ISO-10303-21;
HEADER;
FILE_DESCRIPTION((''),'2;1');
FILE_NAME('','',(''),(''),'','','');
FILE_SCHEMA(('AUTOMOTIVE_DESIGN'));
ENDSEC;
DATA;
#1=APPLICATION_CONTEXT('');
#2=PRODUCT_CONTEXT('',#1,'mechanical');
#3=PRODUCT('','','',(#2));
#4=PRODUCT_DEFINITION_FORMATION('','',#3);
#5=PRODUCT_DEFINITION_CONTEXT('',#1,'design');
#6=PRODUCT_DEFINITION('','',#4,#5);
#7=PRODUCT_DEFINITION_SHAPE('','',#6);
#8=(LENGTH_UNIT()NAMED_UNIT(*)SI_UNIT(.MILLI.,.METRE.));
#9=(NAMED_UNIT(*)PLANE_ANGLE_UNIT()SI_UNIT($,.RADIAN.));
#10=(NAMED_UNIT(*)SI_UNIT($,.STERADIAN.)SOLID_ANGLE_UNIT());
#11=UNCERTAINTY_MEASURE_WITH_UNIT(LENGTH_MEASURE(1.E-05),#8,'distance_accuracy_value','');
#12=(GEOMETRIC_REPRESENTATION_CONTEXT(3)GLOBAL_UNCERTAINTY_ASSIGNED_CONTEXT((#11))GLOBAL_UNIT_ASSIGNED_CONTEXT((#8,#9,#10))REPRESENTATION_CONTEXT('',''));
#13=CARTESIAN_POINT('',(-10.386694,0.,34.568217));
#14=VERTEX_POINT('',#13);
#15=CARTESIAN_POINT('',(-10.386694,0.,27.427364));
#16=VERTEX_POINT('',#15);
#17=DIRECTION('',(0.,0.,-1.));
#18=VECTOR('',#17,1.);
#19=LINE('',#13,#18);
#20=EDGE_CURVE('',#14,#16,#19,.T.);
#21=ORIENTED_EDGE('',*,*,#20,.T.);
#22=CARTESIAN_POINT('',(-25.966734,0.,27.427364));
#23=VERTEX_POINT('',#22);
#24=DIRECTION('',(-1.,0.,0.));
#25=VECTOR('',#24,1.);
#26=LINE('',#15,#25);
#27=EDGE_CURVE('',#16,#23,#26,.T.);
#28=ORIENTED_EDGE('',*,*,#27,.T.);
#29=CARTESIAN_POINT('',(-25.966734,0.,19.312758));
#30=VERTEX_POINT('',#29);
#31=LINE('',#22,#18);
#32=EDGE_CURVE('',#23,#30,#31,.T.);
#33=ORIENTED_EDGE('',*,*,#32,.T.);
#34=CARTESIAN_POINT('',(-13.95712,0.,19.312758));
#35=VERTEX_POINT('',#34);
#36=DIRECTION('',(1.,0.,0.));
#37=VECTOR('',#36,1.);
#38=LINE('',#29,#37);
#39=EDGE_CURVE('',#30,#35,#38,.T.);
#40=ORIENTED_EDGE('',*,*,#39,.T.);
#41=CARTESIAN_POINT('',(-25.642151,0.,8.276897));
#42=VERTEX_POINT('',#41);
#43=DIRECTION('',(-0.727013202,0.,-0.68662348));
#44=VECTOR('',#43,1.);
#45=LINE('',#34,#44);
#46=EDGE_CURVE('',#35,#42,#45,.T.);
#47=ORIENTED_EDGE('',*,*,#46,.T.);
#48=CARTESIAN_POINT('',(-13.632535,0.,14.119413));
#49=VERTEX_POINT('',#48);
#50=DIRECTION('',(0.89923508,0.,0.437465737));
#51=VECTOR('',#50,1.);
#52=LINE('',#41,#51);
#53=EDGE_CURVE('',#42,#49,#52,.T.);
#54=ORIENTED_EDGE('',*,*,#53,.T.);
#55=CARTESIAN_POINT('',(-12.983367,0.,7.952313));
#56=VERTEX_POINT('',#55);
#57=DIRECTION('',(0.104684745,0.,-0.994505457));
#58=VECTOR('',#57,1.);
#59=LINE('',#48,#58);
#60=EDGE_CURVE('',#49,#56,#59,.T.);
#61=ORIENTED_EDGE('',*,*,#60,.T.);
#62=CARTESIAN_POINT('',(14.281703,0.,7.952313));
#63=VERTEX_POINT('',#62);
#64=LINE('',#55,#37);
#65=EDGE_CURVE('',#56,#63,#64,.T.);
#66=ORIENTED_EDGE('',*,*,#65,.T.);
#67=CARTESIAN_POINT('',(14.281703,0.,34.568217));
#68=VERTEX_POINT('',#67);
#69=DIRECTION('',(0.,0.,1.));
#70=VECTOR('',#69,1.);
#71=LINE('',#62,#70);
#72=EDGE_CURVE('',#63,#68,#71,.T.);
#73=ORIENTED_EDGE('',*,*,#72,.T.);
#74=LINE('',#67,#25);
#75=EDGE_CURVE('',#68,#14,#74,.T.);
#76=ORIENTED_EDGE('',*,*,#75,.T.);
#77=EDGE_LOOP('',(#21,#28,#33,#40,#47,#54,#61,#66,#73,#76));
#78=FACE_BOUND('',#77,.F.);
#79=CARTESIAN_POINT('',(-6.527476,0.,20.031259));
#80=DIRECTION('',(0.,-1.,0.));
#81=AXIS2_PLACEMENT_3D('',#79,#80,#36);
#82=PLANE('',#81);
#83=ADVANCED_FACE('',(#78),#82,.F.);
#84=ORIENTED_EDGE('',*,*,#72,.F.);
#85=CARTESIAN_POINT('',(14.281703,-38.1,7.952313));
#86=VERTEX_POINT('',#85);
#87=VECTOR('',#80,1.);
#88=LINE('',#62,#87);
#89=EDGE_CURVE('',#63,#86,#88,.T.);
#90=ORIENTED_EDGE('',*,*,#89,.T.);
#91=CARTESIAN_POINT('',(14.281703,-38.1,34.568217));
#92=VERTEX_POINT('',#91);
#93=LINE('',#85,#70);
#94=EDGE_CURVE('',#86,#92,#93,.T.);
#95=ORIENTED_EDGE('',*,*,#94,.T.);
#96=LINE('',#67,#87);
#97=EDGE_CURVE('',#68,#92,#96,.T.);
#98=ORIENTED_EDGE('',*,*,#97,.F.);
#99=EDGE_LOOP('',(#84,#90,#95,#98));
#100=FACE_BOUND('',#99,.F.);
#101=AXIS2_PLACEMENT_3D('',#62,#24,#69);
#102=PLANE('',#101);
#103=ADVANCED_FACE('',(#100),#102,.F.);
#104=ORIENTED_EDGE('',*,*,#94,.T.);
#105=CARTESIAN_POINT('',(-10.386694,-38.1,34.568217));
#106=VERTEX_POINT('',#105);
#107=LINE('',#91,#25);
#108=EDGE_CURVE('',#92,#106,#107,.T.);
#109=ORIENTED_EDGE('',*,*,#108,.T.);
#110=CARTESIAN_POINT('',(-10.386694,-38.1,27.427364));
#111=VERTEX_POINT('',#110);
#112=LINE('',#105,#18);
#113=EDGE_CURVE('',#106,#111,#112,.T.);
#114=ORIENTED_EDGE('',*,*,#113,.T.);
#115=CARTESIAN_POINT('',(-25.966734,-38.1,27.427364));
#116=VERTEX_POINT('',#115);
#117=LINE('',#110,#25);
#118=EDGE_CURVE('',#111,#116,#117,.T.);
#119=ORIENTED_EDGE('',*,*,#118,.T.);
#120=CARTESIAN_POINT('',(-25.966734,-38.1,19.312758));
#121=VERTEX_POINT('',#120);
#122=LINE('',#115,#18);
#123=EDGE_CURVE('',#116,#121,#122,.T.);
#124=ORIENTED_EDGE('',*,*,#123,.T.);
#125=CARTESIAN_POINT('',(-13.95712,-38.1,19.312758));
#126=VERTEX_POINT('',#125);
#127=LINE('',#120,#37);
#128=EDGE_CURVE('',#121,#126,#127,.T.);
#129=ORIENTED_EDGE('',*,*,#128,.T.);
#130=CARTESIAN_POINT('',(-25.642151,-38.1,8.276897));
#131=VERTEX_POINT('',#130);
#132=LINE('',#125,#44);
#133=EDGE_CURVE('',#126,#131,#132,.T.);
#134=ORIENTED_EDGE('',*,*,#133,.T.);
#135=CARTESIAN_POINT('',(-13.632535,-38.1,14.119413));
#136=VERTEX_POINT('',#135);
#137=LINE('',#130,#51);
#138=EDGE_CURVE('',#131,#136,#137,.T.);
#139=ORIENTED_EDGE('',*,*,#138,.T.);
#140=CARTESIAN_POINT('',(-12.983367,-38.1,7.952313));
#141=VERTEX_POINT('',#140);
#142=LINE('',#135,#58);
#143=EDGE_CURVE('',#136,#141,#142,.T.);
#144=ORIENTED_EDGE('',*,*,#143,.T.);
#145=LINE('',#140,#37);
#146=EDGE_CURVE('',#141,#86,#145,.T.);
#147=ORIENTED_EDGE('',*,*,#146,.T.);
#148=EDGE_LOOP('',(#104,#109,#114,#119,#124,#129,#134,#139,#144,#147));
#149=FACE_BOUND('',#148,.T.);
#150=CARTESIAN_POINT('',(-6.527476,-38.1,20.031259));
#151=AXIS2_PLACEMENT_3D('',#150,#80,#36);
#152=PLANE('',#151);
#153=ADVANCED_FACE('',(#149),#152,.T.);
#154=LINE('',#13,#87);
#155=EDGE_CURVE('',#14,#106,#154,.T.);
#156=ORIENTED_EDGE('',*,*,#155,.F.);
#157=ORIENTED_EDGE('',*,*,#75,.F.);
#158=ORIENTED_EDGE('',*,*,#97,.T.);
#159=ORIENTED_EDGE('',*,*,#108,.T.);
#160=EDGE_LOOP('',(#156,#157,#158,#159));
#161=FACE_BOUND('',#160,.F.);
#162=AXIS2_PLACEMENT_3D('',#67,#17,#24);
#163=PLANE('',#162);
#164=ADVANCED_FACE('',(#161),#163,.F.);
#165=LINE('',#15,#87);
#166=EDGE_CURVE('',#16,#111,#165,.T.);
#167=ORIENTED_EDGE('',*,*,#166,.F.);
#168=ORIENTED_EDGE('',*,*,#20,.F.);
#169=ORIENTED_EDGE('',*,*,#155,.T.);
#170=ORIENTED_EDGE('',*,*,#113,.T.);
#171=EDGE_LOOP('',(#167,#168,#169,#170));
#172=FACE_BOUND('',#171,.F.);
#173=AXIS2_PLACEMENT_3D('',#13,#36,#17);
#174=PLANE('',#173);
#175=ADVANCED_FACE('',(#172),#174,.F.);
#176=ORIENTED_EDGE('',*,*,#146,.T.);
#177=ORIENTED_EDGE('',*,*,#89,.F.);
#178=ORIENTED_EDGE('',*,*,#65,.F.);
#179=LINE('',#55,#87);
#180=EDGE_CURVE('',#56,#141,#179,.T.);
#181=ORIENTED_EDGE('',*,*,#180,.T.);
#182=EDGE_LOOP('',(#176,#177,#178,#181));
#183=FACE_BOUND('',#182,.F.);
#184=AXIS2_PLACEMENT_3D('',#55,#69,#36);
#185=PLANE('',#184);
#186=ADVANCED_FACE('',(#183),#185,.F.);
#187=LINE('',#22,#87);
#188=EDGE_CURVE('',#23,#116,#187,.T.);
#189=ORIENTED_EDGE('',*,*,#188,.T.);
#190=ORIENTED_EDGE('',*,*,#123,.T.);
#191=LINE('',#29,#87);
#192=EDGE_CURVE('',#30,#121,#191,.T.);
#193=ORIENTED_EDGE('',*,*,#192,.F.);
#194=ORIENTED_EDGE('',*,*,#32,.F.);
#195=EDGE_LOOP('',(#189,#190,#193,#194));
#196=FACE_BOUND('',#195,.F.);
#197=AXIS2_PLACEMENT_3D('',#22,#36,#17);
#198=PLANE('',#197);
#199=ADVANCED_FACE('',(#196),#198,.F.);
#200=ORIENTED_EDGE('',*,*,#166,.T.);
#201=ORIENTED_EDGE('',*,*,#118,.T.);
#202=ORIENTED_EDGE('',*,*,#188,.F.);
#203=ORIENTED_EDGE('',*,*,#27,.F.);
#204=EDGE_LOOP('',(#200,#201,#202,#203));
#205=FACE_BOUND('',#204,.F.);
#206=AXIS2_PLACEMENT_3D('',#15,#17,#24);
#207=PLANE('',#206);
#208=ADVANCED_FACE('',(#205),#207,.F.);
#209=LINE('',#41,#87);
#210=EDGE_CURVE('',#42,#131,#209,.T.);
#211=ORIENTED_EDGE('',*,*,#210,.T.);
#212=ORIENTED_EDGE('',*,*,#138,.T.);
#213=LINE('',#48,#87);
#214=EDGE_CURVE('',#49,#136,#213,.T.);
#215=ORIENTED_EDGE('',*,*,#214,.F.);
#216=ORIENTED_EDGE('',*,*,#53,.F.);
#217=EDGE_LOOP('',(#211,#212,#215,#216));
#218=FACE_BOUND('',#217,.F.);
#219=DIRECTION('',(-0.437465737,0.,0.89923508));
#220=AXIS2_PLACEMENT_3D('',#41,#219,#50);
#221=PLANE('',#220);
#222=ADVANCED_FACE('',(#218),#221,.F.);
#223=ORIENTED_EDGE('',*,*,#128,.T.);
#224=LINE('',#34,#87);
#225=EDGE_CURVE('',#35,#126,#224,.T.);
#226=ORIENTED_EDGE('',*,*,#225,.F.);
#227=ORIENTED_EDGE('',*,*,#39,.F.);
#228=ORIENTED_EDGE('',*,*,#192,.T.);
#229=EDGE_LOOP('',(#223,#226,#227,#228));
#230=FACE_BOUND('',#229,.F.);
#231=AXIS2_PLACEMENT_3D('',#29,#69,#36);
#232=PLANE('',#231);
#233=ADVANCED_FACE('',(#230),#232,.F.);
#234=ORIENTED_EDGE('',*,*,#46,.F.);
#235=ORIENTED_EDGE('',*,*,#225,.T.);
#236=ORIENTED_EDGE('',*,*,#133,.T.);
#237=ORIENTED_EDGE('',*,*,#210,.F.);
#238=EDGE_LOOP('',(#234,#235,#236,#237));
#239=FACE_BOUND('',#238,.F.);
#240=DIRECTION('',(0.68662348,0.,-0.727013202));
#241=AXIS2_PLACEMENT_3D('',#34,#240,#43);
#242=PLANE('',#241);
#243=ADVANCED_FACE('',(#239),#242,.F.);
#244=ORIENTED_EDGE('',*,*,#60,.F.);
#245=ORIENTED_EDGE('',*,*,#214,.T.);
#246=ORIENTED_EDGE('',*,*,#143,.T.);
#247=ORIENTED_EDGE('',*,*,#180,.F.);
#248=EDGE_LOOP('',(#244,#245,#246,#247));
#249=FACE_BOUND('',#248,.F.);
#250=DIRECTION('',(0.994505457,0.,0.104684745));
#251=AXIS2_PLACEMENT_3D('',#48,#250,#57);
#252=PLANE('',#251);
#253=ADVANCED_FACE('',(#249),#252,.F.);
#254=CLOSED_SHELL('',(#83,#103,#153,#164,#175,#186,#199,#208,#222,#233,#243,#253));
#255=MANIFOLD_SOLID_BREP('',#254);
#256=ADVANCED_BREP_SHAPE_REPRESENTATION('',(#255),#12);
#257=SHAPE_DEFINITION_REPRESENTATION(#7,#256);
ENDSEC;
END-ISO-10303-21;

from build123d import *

# Parameters (mm, degrees)
F2_DEPTH = 38.1


# Not quite as in the source:
# - a feature of the source that left no trace in its solid (it failed there, or was rolled back) is left out


with BuildPart() as f2:
    # F1 (on Front) → F2 (new body)
    with BuildSketch(Plane.XZ):
        Polygon((-13.6325350031, 14.11941275), (-12.983366847, 7.9523129389), (14.2817031592, 7.9523129389), (14.2817031592, 34.5682166517), (-10.3866942227, 34.5682166517), (-10.3866942227, 27.4273641407), (-25.9667336941, 27.4273641407), (-25.9667336941, 19.3127579987), (-13.9571195468, 19.3127579987), (-25.642151013, 8.2768965513), align=None)
    extrude(amount=F2_DEPTH)


solid = f2.part
